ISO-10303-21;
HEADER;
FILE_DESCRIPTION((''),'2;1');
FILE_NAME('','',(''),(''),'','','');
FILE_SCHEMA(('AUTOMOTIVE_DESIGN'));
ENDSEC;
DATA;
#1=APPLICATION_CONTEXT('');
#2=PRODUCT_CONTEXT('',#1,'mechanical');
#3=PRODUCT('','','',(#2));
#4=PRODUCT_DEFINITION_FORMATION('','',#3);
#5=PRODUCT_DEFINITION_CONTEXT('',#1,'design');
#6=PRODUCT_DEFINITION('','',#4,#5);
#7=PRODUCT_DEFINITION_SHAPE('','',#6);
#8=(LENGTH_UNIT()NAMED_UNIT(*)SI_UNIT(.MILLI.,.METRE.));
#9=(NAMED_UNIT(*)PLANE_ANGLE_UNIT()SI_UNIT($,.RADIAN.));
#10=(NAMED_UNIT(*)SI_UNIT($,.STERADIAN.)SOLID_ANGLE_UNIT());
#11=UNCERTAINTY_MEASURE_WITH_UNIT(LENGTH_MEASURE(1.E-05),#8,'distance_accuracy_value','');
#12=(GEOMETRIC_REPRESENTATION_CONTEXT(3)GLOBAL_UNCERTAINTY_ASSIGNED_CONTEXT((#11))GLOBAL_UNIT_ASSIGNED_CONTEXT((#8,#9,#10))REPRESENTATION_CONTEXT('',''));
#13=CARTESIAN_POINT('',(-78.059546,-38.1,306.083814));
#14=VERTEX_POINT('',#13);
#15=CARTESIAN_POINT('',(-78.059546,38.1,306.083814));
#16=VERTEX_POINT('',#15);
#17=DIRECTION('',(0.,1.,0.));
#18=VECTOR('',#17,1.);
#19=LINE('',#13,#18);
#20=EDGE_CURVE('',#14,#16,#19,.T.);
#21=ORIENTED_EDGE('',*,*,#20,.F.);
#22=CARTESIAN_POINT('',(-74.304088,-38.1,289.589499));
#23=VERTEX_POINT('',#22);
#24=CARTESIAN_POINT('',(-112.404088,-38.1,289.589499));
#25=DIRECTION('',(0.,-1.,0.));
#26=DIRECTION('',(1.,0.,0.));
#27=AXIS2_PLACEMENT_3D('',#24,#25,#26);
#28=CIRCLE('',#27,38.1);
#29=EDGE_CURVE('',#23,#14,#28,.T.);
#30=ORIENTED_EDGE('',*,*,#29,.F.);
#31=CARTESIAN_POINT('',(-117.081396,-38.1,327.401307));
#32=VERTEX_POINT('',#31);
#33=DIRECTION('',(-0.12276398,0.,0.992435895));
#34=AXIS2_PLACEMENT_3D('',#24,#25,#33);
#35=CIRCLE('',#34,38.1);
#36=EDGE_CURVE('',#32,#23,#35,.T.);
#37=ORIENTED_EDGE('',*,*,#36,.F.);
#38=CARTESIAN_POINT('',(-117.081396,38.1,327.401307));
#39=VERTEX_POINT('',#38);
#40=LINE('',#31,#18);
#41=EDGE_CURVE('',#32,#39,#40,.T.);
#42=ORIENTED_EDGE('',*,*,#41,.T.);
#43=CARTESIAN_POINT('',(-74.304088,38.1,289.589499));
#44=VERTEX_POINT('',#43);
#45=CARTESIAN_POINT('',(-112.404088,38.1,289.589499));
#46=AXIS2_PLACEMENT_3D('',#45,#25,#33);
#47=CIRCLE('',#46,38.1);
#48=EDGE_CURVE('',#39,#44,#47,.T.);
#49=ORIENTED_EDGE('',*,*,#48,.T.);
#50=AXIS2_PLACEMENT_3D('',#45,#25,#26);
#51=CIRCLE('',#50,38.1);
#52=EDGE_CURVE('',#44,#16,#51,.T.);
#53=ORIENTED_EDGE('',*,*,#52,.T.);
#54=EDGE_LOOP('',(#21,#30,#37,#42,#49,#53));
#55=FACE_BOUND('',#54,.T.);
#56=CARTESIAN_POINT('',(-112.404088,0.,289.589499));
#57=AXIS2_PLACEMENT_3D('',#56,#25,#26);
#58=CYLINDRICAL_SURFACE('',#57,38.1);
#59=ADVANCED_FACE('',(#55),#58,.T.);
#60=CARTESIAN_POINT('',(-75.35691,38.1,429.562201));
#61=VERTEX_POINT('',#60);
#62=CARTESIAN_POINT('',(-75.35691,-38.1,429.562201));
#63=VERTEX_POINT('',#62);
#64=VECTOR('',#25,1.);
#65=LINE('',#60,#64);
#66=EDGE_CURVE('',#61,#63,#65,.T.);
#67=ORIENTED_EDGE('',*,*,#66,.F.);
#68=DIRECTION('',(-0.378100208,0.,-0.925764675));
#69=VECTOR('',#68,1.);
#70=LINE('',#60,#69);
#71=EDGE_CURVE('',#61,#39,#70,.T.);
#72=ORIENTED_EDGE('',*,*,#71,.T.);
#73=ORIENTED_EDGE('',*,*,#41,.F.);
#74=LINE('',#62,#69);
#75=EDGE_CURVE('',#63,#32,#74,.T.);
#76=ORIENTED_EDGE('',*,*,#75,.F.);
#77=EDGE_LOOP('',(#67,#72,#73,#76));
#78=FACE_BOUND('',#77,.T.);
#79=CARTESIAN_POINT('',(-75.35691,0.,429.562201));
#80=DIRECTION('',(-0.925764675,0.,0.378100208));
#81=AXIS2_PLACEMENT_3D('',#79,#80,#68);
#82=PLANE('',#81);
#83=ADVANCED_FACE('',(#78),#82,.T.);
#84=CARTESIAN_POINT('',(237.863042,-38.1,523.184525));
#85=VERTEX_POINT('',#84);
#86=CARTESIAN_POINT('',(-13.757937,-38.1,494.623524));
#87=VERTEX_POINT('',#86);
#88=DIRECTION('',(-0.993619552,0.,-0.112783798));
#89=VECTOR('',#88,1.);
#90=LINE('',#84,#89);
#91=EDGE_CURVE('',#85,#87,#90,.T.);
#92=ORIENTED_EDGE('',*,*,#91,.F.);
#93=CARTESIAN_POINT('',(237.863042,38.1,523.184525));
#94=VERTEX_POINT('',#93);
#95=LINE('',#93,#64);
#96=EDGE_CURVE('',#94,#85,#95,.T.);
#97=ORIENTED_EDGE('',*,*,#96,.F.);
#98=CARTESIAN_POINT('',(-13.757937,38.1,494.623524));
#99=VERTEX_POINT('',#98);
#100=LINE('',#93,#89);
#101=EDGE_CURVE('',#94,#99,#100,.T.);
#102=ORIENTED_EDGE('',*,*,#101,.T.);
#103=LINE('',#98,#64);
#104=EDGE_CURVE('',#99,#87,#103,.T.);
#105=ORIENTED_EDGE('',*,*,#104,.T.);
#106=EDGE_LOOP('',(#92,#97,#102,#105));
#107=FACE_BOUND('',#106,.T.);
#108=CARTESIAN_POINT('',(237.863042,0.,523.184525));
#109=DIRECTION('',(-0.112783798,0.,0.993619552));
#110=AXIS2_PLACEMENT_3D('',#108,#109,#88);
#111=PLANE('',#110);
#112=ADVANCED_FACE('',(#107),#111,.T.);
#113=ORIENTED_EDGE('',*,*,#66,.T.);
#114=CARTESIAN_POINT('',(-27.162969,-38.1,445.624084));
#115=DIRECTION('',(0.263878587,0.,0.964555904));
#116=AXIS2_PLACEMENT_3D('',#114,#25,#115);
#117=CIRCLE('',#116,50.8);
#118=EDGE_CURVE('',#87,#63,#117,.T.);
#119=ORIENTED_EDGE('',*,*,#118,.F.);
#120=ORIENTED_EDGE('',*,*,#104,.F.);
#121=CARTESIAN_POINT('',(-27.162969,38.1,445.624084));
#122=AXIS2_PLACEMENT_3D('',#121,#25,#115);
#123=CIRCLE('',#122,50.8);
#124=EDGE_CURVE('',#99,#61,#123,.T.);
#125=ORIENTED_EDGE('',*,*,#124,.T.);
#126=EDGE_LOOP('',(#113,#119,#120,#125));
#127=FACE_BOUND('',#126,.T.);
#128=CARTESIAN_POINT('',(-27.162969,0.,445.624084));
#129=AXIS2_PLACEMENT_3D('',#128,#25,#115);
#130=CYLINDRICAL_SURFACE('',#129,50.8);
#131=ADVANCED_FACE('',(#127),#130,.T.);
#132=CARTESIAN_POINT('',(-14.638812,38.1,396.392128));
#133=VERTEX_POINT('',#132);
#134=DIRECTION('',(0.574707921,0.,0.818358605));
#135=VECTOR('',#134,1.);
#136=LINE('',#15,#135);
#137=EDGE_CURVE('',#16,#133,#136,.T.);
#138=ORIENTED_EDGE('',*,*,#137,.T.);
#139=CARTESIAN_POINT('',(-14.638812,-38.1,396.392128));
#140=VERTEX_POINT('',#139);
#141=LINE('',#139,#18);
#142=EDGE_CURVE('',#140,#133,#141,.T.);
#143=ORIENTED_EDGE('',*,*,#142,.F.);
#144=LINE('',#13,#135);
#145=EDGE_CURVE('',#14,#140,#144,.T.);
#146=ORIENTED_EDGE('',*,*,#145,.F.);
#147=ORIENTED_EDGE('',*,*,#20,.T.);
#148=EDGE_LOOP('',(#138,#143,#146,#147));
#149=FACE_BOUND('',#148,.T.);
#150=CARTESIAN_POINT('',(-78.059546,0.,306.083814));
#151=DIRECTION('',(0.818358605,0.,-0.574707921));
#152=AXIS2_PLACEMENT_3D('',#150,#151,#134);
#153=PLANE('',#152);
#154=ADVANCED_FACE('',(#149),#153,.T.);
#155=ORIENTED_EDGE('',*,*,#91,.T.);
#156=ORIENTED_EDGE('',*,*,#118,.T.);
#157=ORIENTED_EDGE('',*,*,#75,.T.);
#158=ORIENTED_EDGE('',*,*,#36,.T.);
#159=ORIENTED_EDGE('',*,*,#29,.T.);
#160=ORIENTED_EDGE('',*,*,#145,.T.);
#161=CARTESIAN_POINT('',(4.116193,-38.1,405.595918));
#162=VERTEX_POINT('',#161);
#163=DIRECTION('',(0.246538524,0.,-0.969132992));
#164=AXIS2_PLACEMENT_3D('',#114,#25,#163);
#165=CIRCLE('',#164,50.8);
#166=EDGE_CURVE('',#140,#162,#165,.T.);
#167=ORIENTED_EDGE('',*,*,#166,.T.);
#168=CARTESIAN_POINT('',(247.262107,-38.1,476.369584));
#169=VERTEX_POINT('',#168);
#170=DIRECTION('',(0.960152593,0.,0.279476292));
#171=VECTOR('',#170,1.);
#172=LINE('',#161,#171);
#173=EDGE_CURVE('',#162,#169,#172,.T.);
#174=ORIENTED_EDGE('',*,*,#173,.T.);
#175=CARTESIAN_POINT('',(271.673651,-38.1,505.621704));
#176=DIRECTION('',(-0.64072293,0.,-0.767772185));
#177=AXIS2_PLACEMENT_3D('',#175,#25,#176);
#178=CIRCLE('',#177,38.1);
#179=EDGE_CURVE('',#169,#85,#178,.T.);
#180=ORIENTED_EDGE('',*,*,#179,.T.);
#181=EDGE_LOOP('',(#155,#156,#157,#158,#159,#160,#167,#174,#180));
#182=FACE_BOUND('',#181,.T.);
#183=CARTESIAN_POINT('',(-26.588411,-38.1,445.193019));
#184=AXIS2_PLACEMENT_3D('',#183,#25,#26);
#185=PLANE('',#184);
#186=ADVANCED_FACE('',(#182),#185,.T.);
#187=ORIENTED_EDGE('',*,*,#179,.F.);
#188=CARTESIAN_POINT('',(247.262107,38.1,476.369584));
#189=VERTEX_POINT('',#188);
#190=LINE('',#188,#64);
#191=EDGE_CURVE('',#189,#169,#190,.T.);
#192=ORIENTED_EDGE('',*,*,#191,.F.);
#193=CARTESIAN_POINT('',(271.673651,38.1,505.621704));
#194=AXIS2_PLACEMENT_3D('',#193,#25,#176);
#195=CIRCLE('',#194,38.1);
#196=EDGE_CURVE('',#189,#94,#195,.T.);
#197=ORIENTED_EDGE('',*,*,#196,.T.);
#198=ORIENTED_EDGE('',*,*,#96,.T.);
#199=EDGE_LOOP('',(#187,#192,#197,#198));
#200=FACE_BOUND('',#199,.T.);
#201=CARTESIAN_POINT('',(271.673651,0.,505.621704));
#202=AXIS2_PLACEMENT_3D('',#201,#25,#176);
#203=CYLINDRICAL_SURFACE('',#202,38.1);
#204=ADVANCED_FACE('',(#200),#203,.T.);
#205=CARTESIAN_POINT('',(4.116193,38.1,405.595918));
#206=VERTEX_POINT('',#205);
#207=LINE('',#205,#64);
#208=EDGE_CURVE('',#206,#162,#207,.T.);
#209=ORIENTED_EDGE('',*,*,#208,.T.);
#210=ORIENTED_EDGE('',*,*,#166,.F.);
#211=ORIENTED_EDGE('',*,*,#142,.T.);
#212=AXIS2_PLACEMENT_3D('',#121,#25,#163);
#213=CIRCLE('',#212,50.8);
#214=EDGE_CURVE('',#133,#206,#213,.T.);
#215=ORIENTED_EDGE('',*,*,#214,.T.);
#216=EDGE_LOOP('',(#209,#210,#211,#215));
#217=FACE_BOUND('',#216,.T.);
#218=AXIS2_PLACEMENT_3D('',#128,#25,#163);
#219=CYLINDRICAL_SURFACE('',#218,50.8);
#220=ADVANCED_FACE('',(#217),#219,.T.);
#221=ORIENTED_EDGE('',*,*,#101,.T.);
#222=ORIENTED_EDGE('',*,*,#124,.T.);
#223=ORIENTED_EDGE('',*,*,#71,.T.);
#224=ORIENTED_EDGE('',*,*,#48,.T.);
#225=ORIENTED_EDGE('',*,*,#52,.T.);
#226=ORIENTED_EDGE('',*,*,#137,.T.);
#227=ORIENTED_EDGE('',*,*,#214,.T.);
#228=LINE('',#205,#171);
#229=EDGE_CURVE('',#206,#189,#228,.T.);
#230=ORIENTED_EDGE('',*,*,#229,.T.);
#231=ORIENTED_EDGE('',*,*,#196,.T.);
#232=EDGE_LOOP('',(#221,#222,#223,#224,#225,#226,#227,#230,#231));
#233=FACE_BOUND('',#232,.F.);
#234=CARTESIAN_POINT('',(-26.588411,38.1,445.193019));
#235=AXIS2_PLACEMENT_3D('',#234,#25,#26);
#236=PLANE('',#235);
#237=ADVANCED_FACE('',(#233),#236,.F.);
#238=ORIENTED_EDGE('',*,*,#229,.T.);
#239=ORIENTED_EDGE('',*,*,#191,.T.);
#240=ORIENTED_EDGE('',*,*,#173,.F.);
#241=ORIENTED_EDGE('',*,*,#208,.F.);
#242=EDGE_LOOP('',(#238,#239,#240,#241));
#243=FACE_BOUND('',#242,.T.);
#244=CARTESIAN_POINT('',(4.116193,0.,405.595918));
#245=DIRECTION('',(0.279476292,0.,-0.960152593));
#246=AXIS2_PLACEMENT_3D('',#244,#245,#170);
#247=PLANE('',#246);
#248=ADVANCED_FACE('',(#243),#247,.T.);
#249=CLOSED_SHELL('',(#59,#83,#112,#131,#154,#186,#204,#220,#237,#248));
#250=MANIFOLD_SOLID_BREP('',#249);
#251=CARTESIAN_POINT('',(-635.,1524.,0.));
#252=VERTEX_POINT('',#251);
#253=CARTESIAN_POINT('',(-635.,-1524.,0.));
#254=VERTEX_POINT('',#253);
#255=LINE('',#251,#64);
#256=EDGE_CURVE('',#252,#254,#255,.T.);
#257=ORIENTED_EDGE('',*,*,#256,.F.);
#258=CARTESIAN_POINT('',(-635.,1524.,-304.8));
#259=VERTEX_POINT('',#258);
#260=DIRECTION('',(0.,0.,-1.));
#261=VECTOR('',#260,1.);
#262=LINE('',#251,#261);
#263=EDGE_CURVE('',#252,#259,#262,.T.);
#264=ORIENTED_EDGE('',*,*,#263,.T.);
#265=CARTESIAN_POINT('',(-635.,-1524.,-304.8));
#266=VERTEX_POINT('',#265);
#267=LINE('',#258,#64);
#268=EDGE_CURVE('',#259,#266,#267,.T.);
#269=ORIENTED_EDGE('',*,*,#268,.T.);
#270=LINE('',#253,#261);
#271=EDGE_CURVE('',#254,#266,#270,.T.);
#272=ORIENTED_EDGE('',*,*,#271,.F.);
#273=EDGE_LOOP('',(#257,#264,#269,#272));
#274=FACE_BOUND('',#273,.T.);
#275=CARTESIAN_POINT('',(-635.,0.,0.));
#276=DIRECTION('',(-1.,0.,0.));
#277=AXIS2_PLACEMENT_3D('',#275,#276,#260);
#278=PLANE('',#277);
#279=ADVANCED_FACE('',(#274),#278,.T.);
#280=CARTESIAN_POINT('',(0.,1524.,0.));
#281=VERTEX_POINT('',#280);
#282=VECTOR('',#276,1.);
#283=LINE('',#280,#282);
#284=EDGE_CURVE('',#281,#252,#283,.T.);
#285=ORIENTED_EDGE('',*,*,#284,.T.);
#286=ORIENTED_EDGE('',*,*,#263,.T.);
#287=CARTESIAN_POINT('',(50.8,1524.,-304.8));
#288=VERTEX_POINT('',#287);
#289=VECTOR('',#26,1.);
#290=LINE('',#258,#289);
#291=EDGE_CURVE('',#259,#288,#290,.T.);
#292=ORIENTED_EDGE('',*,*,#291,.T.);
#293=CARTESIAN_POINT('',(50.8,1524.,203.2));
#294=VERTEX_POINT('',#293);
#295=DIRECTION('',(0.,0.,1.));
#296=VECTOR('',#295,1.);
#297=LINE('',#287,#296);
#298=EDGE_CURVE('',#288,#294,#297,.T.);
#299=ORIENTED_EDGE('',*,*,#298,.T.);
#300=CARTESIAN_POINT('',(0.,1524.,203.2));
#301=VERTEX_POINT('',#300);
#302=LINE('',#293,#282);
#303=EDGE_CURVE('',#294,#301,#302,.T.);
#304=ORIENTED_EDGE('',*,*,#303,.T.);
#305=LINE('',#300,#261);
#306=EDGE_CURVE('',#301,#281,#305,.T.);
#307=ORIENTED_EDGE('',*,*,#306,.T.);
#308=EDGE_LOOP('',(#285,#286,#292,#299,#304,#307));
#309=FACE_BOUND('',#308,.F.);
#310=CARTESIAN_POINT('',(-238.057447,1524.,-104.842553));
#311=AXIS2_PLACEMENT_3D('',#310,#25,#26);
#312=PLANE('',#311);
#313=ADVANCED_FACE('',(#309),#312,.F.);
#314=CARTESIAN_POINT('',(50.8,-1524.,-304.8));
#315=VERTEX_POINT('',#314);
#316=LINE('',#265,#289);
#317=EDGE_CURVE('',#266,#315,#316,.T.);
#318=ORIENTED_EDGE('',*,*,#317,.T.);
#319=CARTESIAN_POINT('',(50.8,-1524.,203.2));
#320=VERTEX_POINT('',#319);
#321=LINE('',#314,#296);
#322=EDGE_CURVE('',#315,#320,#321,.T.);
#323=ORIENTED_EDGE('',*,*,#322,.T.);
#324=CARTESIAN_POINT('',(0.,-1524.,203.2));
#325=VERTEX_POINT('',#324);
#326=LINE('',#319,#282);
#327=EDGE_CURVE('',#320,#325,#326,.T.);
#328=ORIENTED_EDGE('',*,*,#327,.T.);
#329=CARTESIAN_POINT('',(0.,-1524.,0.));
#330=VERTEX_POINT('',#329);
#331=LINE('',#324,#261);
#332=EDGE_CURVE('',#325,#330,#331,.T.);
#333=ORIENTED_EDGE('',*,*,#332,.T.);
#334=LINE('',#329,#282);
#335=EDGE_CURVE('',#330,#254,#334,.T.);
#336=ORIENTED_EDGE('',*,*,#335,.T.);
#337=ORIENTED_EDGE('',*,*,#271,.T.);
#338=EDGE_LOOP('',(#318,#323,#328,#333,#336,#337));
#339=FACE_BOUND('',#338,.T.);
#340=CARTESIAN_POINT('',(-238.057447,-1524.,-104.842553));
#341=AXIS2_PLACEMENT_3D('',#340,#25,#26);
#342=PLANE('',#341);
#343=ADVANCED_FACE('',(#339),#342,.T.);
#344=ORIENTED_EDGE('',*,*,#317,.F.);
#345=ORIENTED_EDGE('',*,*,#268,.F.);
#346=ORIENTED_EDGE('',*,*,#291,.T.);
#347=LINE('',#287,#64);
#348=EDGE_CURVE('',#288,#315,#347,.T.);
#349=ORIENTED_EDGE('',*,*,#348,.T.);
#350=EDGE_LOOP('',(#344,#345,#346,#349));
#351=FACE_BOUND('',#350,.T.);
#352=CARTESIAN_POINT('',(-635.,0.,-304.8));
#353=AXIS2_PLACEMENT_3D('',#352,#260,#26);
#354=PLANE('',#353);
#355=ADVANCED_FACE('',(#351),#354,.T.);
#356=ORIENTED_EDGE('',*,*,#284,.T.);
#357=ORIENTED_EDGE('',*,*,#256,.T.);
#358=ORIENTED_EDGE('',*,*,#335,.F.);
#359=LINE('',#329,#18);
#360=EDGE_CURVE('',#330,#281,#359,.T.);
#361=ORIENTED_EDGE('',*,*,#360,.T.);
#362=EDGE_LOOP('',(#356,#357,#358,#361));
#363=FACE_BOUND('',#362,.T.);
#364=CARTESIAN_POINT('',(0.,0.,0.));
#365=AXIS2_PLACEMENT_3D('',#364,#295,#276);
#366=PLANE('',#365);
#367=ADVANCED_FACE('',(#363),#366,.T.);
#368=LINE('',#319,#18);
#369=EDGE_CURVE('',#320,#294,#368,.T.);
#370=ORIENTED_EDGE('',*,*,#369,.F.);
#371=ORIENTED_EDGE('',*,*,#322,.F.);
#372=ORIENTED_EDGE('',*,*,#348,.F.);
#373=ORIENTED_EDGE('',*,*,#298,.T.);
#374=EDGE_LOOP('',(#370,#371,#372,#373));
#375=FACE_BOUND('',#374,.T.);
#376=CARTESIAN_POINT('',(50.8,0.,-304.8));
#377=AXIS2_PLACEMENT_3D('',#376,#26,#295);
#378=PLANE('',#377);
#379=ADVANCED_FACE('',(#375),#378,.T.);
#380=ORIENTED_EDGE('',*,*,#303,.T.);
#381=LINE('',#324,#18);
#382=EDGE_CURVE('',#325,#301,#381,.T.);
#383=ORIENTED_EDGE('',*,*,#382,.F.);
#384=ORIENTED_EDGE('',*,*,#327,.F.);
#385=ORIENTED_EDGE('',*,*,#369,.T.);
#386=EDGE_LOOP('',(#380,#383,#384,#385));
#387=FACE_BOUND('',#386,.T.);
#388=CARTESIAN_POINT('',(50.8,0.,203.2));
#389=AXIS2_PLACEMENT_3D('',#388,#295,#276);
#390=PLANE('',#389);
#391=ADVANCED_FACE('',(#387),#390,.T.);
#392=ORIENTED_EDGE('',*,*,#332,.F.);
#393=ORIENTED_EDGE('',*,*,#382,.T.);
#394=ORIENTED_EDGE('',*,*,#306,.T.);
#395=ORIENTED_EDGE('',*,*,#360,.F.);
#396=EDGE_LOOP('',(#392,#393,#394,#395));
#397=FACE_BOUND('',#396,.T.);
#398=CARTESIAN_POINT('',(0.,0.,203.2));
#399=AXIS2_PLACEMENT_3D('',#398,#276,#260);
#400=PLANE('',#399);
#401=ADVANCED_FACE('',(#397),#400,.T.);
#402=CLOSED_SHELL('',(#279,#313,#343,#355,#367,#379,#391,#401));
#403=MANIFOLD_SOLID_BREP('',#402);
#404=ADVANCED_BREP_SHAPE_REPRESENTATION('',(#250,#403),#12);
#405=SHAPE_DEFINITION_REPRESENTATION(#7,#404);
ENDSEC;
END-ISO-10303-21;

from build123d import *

# Parameters (mm, degrees)
F1_DEPTH = 1524
F3_DEPTH = 38.1


# Not quite as in the source:
# - the program builds the solid bodies; features that only make, move or delete a surface that nothing else refers to are left out


with BuildPart() as f1:
    # F0 (on Front) → F1 (new body, symmetric)
    with BuildSketch(Plane.XZ):
        Polygon((0, 0), (-635, 0), (-635, -304.8), (50.8, -304.8), (50.8, 203.2), (0, 203.2), align=None)
    extrude(amount=F1_DEPTH, both=True)


with BuildPart() as f3:
    # F2 (on Front) → F3 (new body, symmetric)
    with BuildSketch(Plane.XZ):
        with BuildLine():
            ThreePointArc((-75.3569098829, 429.5622010227), (-51.5175746271, 401.0427737637), (-14.6388120751, 396.3921276521))
            ThreePointArc((-14.6388120751, 396.3921276521), (-4.7830646148, 400.019479985), (4.1161927035, 405.5959181074))
            ThreePointArc((4.1161927035, 405.5959181074), (18.4967583285, 423.3568590758), (23.6370308853, 445.6240836405))
            ThreePointArc((23.6370308853, 445.6240836405), (13.220292501, 476.443431156), (-13.7579368817, 494.6235235438))
            ThreePointArc((-13.7579368817, 494.6235235438), (-64.0521404433, 480.5501346438), (-75.3569098829, 429.5622010227))
        make_face()
        with BuildLine():
            ThreePointArc((23.6370308853, 445.6240836405), (18.4967583285, 423.3568590758), (4.1161927035, 405.5959181074))
            Line((4.1161927035, 405.5959181074), (247.2621074291, 476.3695837783))
            ThreePointArc((247.2621074291, 476.3695837783), (234.3190735269, 498.1220014658), (237.8630415532, 523.1845251311))
            Line((237.8630415532, 523.1845251311), (-13.7579368817, 494.6235235438))
            ThreePointArc((-13.7579368817, 494.6235235438), (13.220292501, 476.443431156), (23.6370308853, 445.6240836405))
        make_face()
        with BuildLine():
            ThreePointArc((237.8630415532, 523.1845251311), (234.3190735269, 498.1220014658), (247.2621074291, 476.3695837783))
            ThreePointArc((247.2621074291, 476.3695837783), (287.8218736761, 471.1130832643), (309.7736510471, 505.6217040122))
            ThreePointArc((309.7736510471, 505.6217040122), (280.713169239, 542.6338251465), (237.8630415532, 523.1845251311))
        make_face()
        with BuildLine():
            ThreePointArc((-117.0813960528, 327.4013066613), (-137.6370487848, 261.0429106479), (-74.3040884081, 289.5894990716))
            ThreePointArc((-74.3040884081, 289.5894990716), (-75.2548147797, 298.0477180849), (-78.059546092, 306.0838136404))
            ThreePointArc((-78.059546092, 306.0838136404), (-94.1381342738, 323.0254814792), (-117.0813960528, 327.4013066613))
        make_face()
        with BuildLine():
            ThreePointArc((-117.0813960528, 327.4013066613), (-94.1381342738, 323.0254814792), (-78.059546092, 306.0838136404))
            Line((-78.059546092, 306.0838136404), (-14.6388120751, 396.3921276521))
            ThreePointArc((-14.6388120751, 396.3921276521), (-51.5175746271, 401.0427737637), (-75.3569098829, 429.5622010227))
            Line((-75.3569098829, 429.5622010227), (-117.0813960528, 327.4013066613))
        make_face()
    extrude(amount=F3_DEPTH, both=True)


solid = Compound([f1.part, f3.part])
